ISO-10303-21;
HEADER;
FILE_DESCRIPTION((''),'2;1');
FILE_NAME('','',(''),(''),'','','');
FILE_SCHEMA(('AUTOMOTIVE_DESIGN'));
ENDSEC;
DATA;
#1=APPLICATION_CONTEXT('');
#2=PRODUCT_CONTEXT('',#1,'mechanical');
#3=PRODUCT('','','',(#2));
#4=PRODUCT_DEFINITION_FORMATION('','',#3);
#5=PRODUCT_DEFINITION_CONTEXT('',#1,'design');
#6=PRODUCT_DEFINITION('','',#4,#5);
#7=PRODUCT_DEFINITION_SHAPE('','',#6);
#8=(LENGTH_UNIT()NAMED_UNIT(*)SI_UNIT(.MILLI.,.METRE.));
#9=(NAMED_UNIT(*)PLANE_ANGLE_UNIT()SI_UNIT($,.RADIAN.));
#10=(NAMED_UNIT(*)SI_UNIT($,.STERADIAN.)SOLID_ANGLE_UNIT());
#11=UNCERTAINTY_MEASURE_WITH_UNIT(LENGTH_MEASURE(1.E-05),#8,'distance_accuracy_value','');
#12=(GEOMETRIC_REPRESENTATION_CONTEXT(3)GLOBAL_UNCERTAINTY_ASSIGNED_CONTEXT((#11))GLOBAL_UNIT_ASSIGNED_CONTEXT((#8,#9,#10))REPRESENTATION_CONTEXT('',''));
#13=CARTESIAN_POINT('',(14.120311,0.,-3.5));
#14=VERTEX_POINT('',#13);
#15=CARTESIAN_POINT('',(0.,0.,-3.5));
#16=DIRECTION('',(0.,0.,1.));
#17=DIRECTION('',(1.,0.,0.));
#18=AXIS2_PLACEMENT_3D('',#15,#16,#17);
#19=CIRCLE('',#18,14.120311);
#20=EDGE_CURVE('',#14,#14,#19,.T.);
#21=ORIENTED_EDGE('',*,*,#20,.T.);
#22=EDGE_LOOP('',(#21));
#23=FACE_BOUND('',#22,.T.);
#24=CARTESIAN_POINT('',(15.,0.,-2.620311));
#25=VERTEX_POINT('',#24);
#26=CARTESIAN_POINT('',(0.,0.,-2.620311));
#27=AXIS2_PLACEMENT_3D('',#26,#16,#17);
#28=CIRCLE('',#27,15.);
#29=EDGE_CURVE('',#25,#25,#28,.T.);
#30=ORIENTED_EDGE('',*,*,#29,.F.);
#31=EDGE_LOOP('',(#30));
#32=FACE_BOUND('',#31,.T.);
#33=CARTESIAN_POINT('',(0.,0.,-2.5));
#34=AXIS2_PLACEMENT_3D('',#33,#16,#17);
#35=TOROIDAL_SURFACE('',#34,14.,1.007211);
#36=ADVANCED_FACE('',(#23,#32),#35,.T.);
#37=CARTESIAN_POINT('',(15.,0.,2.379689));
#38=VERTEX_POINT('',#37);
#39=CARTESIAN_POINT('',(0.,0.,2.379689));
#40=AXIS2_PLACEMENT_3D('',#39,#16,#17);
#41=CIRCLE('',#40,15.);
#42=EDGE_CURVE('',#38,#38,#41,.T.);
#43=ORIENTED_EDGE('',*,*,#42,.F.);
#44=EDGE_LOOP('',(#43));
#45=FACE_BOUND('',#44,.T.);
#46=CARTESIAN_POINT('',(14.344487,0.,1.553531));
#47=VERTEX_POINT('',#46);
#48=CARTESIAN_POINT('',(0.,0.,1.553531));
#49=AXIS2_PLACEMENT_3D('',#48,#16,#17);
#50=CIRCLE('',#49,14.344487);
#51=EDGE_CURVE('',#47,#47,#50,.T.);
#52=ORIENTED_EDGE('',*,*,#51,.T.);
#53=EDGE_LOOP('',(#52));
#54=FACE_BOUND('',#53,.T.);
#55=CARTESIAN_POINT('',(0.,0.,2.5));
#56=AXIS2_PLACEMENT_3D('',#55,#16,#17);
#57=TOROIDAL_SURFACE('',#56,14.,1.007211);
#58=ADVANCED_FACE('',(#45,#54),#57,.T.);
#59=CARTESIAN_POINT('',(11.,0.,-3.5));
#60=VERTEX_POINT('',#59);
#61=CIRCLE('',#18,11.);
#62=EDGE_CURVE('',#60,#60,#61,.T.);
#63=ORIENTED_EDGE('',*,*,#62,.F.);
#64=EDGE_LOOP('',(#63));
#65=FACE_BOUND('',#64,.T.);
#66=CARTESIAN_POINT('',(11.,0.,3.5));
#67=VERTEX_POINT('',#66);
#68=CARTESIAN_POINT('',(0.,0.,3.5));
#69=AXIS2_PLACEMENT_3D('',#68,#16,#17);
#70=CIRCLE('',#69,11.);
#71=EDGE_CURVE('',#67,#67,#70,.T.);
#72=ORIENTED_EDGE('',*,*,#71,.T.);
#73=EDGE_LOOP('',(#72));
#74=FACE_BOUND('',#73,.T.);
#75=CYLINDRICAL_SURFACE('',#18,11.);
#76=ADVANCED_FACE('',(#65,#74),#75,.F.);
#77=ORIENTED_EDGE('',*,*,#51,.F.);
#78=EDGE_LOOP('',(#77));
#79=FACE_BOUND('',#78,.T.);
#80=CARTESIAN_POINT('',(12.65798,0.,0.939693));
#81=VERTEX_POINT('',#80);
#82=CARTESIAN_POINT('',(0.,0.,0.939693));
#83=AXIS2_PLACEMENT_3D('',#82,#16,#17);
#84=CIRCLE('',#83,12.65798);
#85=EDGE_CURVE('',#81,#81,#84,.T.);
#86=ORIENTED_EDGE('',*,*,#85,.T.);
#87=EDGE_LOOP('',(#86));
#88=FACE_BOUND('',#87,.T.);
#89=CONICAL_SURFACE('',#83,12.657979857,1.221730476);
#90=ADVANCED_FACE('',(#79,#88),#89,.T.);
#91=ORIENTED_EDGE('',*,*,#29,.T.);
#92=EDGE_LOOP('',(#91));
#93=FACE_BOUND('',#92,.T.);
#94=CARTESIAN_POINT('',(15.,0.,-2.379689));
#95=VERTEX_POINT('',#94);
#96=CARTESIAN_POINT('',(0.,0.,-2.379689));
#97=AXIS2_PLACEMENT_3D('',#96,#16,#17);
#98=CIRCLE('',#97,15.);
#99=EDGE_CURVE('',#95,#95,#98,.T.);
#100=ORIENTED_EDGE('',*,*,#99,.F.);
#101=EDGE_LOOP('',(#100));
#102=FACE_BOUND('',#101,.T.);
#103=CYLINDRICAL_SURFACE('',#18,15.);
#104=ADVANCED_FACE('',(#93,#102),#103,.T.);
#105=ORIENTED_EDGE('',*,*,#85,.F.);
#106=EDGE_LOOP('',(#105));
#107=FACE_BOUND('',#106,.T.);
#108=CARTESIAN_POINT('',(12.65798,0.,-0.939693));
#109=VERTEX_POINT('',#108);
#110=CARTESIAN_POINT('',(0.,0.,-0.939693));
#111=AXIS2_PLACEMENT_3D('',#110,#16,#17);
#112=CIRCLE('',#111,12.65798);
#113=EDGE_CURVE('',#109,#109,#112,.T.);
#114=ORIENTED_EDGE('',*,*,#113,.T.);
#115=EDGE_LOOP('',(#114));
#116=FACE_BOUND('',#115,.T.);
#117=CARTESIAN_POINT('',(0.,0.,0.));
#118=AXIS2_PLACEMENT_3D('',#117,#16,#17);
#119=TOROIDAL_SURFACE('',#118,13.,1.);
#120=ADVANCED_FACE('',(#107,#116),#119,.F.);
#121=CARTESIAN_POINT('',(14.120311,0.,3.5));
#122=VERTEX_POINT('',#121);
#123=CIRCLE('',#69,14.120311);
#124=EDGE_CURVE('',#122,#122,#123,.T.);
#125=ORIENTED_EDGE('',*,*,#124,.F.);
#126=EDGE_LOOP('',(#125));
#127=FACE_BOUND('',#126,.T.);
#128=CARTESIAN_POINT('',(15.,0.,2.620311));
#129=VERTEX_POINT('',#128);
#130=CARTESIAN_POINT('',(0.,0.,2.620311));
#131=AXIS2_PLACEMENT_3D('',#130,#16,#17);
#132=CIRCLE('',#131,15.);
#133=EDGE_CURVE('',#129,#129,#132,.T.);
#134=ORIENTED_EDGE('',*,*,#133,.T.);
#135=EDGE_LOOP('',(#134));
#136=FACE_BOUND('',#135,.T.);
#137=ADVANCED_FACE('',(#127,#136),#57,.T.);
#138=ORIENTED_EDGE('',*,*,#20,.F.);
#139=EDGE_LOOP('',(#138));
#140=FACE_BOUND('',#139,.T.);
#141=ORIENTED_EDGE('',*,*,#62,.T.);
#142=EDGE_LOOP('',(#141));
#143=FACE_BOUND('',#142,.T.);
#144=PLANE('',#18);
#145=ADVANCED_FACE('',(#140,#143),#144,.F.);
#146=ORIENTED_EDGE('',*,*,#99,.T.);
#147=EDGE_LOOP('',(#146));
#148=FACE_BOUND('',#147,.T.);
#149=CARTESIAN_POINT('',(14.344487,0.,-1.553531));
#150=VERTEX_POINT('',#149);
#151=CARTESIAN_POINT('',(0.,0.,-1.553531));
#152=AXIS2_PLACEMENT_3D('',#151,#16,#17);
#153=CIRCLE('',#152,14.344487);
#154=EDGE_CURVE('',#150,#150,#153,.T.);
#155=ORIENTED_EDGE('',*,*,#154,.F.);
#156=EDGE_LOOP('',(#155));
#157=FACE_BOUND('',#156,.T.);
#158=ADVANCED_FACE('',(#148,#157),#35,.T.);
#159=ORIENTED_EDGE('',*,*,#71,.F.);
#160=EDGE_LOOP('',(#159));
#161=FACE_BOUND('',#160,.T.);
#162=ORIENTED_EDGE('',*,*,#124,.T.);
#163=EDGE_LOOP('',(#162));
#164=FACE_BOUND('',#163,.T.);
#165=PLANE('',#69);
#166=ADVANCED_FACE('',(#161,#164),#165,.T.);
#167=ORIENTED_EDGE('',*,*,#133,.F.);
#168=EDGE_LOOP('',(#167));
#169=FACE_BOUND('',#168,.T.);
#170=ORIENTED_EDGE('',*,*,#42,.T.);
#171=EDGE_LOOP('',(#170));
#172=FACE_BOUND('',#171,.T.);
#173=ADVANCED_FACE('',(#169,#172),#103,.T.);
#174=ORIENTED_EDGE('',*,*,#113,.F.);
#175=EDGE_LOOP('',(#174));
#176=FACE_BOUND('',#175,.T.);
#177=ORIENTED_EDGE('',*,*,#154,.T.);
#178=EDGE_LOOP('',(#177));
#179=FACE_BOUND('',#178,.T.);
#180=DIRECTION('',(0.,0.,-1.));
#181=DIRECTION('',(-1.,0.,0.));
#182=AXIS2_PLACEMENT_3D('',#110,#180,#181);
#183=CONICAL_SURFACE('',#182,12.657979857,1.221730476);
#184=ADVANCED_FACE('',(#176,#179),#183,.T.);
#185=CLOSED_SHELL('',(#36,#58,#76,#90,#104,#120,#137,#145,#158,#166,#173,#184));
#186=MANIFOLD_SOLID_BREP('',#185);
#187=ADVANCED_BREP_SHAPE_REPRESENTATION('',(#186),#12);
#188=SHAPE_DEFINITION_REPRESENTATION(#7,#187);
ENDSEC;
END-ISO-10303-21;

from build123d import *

# Parameters (mm, degrees)
BOSS_EXTRUDE1_DEPTH      = 3.5
BOSS_EXTRUDE1_DEPTH_BACK = 3.5
SKETCH1_R                = 15
SKETCH1_R_2              = 11


# Read off the part's stored shape, not the designer's step: Cut-Revolve2
with BuildPart() as part:
    # Sketch1 → Boss-Extrude1 (new, two sides: drawn at the far end of the back side and taken through both)
    with BuildSketch(Plane.XY.offset(-BOSS_EXTRUDE1_DEPTH_BACK)):
        Circle(SKETCH1_R)
        Circle(SKETCH1_R_2, mode=Mode.SUBTRACT)
    extrude(amount=BOSS_EXTRUDE1_DEPTH + BOSS_EXTRUDE1_DEPTH_BACK)

    # Cut-Revolve2 outline → Cut-Revolve2 (revolve, cut)
    with BuildSketch(Plane.XZ):
        with BuildLine():
            ThreePointArc((14.120311353, 3.5), (14.712206017, 3.212206017), (15, 2.620311353))
            Line((15, 2.620311353), (15, 3.5))
            Line((15, 3.5), (14.120311353, 3.5))
        make_face()
        with BuildLine():
            Line((15, -2.379688647), (15, 2.379688647))
            ThreePointArc((15, 2.379688647), (14.789015345, 1.873957185), (14.34448659, 1.553530872))
            Line((14.34448659, 1.553530872), (12.657979857, 0.939692621))
            ThreePointArc((12.657979857, 0.939692621), (12, 0), (12.657979857, -0.939692621))
            Line((12.657979857, -0.939692621), (14.34448659, -1.553530872))
            ThreePointArc((14.34448659, -1.553530872), (14.789015345, -1.873957185), (15, -2.379688647))
        make_face()
        with BuildLine():
            Line((15, -3.5), (15, -2.620311353))
            ThreePointArc((15, -2.620311353), (14.712206017, -3.212206017), (14.120311353, -3.5))
            Line((14.120311353, -3.5), (15, -3.5))
        make_face()
    revolve(axis=Axis((0, 0, 0), (0, 0, 1)), mode=Mode.SUBTRACT)


solid = part.part
